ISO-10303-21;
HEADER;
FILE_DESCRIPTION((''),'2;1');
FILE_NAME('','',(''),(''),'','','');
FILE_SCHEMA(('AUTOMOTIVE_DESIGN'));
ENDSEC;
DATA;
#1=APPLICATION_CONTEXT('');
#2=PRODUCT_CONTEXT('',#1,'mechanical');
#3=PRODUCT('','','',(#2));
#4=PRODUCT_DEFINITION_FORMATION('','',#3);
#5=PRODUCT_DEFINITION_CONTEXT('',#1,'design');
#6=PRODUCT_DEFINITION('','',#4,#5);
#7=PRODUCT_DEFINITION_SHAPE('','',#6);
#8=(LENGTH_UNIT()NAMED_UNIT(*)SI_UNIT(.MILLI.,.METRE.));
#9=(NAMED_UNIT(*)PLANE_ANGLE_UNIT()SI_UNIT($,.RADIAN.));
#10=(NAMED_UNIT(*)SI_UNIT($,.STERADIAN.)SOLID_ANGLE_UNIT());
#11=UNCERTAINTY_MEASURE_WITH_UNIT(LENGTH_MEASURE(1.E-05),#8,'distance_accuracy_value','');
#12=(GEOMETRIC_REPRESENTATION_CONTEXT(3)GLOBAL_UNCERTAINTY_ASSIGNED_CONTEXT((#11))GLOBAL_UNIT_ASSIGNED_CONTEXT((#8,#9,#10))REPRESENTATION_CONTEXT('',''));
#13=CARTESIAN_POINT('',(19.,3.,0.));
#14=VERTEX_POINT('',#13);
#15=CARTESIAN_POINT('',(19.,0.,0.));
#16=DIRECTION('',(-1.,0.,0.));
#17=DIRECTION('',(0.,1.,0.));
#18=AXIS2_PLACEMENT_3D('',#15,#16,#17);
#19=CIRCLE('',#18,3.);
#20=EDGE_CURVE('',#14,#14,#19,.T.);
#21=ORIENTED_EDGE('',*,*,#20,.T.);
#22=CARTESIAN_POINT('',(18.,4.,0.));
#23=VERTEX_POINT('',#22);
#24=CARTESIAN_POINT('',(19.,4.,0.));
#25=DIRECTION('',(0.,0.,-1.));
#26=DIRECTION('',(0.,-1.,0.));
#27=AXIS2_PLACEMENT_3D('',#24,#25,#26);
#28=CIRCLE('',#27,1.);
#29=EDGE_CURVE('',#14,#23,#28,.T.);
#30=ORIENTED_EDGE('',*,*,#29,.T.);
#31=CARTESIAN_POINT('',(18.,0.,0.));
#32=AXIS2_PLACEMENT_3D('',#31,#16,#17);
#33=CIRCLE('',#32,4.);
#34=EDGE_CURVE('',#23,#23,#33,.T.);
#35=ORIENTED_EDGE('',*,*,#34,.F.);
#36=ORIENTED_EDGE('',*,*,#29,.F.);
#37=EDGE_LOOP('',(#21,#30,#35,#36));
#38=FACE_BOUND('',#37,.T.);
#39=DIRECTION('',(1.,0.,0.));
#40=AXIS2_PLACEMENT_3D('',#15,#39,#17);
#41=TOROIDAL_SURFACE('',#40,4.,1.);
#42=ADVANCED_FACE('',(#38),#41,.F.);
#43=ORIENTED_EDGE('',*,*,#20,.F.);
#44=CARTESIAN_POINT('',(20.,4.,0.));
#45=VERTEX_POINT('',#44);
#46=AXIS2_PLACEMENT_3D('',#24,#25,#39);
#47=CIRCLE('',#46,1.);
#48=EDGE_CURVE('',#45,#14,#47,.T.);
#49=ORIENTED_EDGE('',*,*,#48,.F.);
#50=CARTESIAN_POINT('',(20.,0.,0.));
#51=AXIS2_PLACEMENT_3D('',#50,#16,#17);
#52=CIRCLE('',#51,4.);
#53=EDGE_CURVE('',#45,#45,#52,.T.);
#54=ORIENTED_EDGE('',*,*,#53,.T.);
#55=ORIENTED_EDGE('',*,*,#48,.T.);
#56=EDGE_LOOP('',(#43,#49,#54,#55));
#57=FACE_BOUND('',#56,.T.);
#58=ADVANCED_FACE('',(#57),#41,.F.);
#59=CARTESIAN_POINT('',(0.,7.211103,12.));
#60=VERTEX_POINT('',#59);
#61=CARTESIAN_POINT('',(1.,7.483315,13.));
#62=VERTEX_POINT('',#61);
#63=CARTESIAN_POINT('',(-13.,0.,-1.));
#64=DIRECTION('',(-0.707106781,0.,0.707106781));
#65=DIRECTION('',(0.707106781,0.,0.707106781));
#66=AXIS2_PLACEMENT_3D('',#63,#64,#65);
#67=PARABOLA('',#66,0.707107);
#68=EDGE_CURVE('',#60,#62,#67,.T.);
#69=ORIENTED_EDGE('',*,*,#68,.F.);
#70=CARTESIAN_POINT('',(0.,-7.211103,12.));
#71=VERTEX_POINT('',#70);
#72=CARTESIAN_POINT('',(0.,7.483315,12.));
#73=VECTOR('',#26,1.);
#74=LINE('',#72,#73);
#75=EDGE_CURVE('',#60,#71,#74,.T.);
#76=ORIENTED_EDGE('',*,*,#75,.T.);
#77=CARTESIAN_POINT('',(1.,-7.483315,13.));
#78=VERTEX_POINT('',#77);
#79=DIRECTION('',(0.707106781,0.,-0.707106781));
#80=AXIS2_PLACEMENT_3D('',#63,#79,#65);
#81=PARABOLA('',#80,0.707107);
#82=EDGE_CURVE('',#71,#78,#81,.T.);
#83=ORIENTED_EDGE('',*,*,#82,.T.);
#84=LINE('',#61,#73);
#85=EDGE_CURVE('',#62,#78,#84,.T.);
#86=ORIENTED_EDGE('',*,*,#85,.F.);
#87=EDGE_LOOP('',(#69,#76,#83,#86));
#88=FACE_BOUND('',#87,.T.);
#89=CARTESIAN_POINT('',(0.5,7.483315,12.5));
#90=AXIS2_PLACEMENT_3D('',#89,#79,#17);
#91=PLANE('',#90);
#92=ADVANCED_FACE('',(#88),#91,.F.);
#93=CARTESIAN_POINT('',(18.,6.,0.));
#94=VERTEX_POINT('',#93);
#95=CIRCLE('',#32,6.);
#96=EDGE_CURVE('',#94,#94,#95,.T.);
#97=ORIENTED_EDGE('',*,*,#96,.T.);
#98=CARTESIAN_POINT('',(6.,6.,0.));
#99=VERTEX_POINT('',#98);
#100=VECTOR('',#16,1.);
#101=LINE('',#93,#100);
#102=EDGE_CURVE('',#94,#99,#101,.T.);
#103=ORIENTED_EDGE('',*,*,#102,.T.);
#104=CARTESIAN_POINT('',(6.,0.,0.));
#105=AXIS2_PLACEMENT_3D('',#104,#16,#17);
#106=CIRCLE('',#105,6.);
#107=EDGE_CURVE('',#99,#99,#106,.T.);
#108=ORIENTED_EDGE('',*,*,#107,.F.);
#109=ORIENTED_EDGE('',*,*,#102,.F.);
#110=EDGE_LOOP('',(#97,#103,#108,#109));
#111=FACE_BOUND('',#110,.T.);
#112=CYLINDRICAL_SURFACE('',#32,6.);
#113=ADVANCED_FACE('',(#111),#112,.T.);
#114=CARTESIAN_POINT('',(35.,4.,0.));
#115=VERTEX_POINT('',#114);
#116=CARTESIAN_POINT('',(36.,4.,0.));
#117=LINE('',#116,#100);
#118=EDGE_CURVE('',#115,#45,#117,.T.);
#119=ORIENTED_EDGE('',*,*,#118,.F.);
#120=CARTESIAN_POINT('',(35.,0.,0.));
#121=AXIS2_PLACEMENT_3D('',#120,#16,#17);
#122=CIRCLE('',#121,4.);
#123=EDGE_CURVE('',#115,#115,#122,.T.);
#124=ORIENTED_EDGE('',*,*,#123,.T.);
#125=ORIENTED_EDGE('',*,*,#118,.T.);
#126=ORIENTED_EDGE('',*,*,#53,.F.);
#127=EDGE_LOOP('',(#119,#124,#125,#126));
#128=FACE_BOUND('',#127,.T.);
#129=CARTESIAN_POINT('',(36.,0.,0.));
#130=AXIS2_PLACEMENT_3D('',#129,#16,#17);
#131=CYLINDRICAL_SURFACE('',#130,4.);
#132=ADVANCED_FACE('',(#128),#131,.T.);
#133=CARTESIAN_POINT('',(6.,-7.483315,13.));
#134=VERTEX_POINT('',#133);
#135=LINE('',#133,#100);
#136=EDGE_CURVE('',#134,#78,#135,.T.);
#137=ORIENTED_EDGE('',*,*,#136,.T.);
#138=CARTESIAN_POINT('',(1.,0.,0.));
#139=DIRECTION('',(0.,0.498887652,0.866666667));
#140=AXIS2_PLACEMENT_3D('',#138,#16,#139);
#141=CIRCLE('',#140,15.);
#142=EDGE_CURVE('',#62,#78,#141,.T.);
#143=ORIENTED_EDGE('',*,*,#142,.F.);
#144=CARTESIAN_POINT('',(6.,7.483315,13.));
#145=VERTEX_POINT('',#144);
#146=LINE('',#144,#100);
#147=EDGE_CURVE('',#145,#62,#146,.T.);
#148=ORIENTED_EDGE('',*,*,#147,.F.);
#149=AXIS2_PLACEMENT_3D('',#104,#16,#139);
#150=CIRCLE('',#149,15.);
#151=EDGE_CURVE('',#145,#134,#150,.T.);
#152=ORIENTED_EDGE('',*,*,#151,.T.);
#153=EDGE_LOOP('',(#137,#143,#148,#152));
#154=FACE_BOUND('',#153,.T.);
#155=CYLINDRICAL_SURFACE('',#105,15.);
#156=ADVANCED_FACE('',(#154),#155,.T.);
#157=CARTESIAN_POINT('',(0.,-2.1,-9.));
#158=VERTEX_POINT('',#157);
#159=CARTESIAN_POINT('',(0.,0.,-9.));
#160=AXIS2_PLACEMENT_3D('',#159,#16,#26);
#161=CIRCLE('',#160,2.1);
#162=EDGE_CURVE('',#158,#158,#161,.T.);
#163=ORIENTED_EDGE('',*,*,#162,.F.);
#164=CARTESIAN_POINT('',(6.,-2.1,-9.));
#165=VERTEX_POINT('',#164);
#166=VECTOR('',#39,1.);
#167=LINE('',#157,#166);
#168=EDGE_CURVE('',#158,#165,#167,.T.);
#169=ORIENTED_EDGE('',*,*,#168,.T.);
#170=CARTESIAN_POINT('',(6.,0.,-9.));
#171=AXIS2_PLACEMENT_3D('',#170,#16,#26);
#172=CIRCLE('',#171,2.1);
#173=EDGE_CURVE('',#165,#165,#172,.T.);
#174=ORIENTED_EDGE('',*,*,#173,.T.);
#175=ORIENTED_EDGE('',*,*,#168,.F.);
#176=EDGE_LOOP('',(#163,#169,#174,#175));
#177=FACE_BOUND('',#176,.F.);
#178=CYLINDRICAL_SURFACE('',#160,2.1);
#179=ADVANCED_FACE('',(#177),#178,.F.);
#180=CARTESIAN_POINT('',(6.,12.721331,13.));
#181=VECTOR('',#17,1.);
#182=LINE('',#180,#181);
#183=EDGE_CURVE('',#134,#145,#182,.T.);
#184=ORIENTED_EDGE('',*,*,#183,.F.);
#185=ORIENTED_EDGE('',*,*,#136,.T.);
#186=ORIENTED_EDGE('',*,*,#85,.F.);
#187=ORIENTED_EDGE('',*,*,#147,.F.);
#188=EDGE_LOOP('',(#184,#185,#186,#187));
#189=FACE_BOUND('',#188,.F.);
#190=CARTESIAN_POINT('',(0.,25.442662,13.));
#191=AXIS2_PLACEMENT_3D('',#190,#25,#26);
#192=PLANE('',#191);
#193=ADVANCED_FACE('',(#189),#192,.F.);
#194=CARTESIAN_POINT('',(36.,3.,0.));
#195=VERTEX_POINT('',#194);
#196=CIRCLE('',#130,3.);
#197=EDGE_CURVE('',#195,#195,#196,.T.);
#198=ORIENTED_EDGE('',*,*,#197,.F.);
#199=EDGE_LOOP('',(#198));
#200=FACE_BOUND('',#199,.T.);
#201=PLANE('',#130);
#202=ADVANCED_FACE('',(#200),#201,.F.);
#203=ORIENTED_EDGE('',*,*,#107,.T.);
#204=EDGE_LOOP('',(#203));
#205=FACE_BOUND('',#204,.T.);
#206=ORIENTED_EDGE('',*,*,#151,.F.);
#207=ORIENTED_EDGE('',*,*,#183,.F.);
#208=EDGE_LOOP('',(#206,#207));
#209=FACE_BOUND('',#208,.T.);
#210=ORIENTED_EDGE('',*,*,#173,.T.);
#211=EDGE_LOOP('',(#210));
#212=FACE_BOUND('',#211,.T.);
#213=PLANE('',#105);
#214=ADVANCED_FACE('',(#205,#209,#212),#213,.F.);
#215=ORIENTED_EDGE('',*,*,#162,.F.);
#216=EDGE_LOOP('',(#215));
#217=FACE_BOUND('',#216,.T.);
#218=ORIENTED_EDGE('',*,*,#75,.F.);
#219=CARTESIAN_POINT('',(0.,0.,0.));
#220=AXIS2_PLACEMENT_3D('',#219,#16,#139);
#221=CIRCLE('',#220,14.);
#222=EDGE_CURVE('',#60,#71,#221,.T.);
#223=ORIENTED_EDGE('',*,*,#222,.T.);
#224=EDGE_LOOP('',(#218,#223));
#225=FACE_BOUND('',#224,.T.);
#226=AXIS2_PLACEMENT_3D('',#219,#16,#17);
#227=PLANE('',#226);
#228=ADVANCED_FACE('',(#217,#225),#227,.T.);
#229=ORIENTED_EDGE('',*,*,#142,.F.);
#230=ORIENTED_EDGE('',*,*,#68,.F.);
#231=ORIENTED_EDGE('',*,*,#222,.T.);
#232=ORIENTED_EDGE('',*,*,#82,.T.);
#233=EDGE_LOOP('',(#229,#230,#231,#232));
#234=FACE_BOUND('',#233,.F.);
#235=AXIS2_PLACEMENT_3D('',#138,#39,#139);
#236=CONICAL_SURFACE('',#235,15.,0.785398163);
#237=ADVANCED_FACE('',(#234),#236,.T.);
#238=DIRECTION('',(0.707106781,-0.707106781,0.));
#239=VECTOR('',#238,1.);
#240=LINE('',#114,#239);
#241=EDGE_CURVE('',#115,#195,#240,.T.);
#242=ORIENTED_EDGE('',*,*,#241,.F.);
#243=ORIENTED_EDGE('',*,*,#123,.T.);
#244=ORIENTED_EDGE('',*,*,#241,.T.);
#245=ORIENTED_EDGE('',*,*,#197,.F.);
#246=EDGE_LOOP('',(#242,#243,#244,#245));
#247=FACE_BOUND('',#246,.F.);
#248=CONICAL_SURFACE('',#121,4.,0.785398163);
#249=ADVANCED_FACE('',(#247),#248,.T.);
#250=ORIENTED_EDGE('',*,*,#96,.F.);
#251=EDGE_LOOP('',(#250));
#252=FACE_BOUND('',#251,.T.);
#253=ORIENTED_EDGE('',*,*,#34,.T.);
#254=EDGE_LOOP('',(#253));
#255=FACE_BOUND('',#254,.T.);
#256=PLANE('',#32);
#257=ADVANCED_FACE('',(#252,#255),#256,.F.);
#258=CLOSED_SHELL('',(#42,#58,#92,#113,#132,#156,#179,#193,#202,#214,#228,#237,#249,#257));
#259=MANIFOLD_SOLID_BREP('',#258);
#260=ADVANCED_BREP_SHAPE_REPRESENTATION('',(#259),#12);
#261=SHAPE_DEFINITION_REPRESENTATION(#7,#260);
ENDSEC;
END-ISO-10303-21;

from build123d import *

# Parameters (mm, degrees)
F3_DEPTH = 25
F4_SIZE  = 1
F5_R     = 2.1
F6_DEPTH = 6


with BuildPart() as f1:
    # F0 (on Top) → F1 (revolve)
    with BuildSketch(Plane.XY):
        with BuildLine():
            Line((0, 15), (0, 0))
            Line((0, 0), (36, 0))
            Line((36, 0), (36, 4))
            Line((36, 4), (20, 4))
            ThreePointArc((20, 4), (19.7071067812, 3.2928932188), (19, 3))
            ThreePointArc((19, 3), (18.2928932188, 3.2928932188), (18, 4))
            Line((18, 4), (18, 6))
            Line((18, 6), (6, 6))
            Line((6, 6), (6, 15))
            Line((6, 15), (0, 15))
        make_face()
    revolve(axis=Axis((18, 0, 0), (-1, 0, 0)))

    # F2 (on face) → F3 (cut)
    with BuildSketch(Plane(origin=(0, 0, 0), x_dir=(0, -1, 0), z_dir=(-1, 0, 0))):
        with BuildLine():
            Line((23.4234053642, 26.5963438079), (-25.4426617175, 26.5963438079))
            Line((-25.4426617175, 26.5963438079), (-25.4426617175, 13))
            Line((-25.4426617175, 13), (-7.4833147735, 13))
            ThreePointArc((-7.4833147735, 13), (0, 15), (7.4833147735, 13))
            Line((7.4833147735, 13), (23.4234053642, 13))
            Line((23.4234053642, 13), (23.4234053642, 26.5963438079))
        make_face()
        with BuildLine():
            ThreePointArc((7.4833147735, 13), (0, 15), (-7.4833147735, 13))
            Line((-7.4833147735, 13), (7.4833147735, 13))
        make_face()
    extrude(amount=-F3_DEPTH, mode=Mode.SUBTRACT)

    # F4
    f4_edges = [f1.edges().sort_by_distance(p)[0] for p in [
        (0, 0, -15),
        (0, 0, 13),
        (36, -4, 0),
    ]]
    chamfer(f4_edges, length=F4_SIZE)

    # F5 (on face) → F6 (cut)
    with BuildSketch(Plane(origin=(0, 0, 0), x_dir=(0, -1, 0), z_dir=(-1, 0, 0))):
        with Locations((0, -9)):
            Circle(F5_R)
    extrude(amount=-F6_DEPTH, mode=Mode.SUBTRACT)


solid = f1.part
